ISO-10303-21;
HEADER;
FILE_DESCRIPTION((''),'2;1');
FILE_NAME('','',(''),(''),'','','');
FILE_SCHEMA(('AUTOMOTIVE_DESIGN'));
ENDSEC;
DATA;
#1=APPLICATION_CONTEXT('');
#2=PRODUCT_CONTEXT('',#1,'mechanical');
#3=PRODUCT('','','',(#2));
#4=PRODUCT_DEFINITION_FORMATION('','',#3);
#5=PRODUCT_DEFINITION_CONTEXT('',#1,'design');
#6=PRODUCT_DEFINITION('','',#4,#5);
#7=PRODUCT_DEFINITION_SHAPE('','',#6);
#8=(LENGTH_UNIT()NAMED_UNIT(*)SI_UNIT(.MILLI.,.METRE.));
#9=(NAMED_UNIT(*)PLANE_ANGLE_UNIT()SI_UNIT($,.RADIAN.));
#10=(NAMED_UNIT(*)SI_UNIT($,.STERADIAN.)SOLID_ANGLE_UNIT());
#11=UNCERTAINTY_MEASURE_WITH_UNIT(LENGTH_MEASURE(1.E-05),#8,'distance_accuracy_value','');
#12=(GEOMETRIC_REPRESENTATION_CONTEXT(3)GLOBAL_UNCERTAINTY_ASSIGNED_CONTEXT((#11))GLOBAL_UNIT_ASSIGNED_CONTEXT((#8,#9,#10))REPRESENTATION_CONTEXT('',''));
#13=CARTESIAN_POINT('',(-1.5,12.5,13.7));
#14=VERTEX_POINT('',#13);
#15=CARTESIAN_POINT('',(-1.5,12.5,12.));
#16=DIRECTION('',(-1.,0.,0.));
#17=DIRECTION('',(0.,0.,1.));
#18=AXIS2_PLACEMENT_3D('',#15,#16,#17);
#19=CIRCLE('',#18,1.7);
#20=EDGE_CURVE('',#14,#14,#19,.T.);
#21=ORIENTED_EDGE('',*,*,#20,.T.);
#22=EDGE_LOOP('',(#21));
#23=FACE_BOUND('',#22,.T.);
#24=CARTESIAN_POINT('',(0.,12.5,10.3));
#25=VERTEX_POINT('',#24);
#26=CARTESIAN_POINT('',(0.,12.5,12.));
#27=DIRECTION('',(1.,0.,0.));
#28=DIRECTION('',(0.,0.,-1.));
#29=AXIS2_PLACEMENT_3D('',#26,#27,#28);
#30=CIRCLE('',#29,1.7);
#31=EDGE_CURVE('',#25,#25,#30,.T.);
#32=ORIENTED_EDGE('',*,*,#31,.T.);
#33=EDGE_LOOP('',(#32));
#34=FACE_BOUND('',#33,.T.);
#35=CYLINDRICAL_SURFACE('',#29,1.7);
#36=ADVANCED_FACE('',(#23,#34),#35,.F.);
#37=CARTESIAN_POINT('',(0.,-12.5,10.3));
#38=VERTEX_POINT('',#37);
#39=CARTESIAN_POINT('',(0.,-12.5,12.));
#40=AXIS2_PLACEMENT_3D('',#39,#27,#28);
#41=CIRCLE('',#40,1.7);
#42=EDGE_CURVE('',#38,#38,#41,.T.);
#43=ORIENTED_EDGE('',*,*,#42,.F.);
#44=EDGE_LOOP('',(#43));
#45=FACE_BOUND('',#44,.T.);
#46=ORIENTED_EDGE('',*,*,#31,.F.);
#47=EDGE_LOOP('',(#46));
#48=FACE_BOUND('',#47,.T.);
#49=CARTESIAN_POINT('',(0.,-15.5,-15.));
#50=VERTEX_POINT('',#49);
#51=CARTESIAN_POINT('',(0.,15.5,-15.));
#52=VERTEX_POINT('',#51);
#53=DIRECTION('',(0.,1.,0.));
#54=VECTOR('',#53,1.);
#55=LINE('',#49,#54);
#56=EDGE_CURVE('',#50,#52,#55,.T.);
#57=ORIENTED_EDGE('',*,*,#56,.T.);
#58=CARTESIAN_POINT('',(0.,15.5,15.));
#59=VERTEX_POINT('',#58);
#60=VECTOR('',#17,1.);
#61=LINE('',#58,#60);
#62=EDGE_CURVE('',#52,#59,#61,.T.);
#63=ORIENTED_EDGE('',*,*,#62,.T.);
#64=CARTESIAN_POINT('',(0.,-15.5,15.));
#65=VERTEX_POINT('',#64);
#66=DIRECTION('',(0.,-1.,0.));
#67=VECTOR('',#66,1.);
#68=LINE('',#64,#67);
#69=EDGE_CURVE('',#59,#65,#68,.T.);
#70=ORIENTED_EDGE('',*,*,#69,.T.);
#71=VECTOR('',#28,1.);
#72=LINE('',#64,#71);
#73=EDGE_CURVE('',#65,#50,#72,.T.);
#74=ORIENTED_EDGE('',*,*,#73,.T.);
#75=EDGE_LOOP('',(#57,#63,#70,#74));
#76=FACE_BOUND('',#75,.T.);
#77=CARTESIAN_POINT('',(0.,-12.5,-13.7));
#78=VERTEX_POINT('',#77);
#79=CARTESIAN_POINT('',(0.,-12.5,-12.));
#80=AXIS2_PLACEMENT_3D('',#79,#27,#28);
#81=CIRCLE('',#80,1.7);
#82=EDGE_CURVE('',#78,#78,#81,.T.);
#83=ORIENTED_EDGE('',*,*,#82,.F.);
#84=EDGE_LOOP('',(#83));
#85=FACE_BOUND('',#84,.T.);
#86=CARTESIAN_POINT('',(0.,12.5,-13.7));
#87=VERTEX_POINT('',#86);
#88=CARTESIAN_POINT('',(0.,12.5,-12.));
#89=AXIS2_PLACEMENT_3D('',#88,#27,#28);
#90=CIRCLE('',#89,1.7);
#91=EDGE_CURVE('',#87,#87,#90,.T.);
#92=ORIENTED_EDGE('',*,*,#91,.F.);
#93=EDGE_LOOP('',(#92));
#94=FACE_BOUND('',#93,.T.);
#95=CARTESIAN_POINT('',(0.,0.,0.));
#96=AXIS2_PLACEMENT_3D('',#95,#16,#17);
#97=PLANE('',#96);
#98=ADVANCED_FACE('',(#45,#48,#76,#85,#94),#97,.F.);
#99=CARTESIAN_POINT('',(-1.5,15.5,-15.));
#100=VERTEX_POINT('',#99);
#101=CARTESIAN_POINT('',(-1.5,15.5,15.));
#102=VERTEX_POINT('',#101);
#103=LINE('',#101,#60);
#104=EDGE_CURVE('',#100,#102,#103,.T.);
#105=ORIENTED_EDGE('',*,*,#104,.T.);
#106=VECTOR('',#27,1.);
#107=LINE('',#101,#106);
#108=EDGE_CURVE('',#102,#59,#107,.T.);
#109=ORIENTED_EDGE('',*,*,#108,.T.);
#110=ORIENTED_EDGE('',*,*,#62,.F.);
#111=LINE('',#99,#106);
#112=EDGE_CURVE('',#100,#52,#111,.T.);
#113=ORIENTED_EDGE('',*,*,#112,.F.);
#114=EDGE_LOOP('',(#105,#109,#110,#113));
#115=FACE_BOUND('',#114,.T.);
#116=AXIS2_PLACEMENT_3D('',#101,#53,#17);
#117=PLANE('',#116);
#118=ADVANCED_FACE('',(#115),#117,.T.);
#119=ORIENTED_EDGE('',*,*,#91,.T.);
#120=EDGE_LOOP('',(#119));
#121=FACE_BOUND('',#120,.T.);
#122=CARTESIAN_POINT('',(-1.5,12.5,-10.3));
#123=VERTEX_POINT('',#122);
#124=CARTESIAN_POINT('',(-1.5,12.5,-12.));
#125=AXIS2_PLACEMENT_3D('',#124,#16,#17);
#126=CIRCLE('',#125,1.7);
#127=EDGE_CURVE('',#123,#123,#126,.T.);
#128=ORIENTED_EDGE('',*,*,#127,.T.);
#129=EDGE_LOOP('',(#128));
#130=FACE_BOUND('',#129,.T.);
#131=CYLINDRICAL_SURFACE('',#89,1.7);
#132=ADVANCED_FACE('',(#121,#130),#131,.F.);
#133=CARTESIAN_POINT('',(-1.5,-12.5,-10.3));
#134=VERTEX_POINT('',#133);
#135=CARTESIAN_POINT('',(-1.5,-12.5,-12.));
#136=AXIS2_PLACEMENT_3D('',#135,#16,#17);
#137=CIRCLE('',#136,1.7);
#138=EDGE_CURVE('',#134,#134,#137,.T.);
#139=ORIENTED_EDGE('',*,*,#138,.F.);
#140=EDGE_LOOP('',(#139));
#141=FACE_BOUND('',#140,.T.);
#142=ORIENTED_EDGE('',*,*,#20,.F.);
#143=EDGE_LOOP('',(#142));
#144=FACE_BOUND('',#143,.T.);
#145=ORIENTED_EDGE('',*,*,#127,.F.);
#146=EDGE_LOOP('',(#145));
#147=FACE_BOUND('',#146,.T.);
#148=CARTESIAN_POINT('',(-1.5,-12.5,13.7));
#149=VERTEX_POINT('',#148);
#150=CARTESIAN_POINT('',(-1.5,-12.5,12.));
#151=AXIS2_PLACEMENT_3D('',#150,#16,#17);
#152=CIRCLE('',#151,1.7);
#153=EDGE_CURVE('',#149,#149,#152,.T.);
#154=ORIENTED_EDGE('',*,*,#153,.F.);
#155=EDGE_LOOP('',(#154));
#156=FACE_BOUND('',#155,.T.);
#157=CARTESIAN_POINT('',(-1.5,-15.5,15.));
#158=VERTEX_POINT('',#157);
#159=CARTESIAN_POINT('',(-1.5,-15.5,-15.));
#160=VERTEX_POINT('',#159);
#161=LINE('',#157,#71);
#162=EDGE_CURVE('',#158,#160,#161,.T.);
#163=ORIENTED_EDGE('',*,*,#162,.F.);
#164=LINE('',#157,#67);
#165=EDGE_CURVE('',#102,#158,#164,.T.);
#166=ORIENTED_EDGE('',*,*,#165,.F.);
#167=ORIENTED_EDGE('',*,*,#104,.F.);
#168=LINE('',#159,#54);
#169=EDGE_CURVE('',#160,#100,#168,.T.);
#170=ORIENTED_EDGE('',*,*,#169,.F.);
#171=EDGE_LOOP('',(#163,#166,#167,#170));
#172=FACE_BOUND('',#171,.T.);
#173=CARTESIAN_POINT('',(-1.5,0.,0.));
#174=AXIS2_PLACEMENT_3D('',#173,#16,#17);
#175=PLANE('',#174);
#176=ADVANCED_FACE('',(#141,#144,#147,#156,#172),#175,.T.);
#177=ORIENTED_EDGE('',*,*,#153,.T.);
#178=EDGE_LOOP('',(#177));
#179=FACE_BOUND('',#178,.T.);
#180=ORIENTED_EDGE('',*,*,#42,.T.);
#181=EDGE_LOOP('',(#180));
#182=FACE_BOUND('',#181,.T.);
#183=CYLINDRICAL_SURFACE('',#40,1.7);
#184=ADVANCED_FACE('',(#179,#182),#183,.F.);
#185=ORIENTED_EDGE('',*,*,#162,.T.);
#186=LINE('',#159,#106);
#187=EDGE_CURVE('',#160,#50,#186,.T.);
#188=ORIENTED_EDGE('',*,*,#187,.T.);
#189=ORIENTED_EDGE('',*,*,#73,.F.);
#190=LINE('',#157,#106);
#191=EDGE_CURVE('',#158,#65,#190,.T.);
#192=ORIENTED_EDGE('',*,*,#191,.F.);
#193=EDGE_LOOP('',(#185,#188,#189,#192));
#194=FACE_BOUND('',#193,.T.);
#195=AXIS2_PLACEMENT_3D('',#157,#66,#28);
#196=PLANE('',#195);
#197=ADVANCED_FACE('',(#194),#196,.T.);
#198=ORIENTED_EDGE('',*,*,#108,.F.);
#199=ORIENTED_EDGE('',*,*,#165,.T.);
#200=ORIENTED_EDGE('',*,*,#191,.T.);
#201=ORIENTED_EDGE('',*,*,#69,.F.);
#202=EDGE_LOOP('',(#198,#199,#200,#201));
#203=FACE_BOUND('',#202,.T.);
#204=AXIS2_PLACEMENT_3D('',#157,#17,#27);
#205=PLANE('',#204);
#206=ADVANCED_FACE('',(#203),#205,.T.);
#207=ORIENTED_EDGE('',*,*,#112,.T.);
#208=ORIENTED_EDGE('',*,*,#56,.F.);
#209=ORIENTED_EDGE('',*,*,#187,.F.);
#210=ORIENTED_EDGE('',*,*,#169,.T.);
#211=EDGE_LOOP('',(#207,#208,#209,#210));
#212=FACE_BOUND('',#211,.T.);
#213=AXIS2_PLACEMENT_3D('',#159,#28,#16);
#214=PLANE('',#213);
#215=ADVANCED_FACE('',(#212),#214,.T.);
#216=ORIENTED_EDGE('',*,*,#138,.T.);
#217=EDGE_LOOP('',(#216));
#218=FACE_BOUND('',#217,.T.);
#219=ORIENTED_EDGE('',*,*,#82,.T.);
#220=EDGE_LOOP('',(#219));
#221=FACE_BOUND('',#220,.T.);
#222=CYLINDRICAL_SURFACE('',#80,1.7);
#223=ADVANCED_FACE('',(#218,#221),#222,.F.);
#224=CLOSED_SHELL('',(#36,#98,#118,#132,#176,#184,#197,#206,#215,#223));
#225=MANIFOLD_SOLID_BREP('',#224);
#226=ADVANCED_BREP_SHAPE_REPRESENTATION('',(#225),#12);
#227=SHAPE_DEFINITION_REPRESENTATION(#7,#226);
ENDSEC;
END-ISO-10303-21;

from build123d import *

# Parameters (mm, degrees)
SKETCH_1_W             = 30
SKETCH_1_H             = 31
SM_BASE_FLANGE_1_DEPTH = 1.5
HOLE_WIZARD_M3_1_D     = 3.4
HOLE_WIZARD_M3_1_DEPTH = 20
HOLE_WIZARD_M3_1_TIP   = 1.021463052


# Sheet-metal steps are written as plain solids
with BuildPart() as part:
    # Sketch 1 → 基体-法兰1 (new body)
    with BuildSketch(Plane(origin=(0, 0, 0), x_dir=(0, 0, -1), z_dir=(1, 0, 0))):
        Rectangle(SKETCH_1_W, SKETCH_1_H)
    extrude(amount=-SM_BASE_FLANGE_1_DEPTH)

    # M3 间隙孔1
    with Locations(Plane(origin=(0, 0, 0), x_dir=(0, 0, -1), z_dir=(1, 0, 0))):
        with Locations((-12, 12.5), (12, 12.5), (12, -12.5), (-12, -12.5)):
            Hole(HOLE_WIZARD_M3_1_D / 2, depth=HOLE_WIZARD_M3_1_DEPTH)
            with Locations((0, 0, -(HOLE_WIZARD_M3_1_DEPTH + HOLE_WIZARD_M3_1_TIP / 2))):  # 118° drill point
                Cone(0, HOLE_WIZARD_M3_1_D / 2, HOLE_WIZARD_M3_1_TIP, mode=Mode.SUBTRACT)


solid = part.part
